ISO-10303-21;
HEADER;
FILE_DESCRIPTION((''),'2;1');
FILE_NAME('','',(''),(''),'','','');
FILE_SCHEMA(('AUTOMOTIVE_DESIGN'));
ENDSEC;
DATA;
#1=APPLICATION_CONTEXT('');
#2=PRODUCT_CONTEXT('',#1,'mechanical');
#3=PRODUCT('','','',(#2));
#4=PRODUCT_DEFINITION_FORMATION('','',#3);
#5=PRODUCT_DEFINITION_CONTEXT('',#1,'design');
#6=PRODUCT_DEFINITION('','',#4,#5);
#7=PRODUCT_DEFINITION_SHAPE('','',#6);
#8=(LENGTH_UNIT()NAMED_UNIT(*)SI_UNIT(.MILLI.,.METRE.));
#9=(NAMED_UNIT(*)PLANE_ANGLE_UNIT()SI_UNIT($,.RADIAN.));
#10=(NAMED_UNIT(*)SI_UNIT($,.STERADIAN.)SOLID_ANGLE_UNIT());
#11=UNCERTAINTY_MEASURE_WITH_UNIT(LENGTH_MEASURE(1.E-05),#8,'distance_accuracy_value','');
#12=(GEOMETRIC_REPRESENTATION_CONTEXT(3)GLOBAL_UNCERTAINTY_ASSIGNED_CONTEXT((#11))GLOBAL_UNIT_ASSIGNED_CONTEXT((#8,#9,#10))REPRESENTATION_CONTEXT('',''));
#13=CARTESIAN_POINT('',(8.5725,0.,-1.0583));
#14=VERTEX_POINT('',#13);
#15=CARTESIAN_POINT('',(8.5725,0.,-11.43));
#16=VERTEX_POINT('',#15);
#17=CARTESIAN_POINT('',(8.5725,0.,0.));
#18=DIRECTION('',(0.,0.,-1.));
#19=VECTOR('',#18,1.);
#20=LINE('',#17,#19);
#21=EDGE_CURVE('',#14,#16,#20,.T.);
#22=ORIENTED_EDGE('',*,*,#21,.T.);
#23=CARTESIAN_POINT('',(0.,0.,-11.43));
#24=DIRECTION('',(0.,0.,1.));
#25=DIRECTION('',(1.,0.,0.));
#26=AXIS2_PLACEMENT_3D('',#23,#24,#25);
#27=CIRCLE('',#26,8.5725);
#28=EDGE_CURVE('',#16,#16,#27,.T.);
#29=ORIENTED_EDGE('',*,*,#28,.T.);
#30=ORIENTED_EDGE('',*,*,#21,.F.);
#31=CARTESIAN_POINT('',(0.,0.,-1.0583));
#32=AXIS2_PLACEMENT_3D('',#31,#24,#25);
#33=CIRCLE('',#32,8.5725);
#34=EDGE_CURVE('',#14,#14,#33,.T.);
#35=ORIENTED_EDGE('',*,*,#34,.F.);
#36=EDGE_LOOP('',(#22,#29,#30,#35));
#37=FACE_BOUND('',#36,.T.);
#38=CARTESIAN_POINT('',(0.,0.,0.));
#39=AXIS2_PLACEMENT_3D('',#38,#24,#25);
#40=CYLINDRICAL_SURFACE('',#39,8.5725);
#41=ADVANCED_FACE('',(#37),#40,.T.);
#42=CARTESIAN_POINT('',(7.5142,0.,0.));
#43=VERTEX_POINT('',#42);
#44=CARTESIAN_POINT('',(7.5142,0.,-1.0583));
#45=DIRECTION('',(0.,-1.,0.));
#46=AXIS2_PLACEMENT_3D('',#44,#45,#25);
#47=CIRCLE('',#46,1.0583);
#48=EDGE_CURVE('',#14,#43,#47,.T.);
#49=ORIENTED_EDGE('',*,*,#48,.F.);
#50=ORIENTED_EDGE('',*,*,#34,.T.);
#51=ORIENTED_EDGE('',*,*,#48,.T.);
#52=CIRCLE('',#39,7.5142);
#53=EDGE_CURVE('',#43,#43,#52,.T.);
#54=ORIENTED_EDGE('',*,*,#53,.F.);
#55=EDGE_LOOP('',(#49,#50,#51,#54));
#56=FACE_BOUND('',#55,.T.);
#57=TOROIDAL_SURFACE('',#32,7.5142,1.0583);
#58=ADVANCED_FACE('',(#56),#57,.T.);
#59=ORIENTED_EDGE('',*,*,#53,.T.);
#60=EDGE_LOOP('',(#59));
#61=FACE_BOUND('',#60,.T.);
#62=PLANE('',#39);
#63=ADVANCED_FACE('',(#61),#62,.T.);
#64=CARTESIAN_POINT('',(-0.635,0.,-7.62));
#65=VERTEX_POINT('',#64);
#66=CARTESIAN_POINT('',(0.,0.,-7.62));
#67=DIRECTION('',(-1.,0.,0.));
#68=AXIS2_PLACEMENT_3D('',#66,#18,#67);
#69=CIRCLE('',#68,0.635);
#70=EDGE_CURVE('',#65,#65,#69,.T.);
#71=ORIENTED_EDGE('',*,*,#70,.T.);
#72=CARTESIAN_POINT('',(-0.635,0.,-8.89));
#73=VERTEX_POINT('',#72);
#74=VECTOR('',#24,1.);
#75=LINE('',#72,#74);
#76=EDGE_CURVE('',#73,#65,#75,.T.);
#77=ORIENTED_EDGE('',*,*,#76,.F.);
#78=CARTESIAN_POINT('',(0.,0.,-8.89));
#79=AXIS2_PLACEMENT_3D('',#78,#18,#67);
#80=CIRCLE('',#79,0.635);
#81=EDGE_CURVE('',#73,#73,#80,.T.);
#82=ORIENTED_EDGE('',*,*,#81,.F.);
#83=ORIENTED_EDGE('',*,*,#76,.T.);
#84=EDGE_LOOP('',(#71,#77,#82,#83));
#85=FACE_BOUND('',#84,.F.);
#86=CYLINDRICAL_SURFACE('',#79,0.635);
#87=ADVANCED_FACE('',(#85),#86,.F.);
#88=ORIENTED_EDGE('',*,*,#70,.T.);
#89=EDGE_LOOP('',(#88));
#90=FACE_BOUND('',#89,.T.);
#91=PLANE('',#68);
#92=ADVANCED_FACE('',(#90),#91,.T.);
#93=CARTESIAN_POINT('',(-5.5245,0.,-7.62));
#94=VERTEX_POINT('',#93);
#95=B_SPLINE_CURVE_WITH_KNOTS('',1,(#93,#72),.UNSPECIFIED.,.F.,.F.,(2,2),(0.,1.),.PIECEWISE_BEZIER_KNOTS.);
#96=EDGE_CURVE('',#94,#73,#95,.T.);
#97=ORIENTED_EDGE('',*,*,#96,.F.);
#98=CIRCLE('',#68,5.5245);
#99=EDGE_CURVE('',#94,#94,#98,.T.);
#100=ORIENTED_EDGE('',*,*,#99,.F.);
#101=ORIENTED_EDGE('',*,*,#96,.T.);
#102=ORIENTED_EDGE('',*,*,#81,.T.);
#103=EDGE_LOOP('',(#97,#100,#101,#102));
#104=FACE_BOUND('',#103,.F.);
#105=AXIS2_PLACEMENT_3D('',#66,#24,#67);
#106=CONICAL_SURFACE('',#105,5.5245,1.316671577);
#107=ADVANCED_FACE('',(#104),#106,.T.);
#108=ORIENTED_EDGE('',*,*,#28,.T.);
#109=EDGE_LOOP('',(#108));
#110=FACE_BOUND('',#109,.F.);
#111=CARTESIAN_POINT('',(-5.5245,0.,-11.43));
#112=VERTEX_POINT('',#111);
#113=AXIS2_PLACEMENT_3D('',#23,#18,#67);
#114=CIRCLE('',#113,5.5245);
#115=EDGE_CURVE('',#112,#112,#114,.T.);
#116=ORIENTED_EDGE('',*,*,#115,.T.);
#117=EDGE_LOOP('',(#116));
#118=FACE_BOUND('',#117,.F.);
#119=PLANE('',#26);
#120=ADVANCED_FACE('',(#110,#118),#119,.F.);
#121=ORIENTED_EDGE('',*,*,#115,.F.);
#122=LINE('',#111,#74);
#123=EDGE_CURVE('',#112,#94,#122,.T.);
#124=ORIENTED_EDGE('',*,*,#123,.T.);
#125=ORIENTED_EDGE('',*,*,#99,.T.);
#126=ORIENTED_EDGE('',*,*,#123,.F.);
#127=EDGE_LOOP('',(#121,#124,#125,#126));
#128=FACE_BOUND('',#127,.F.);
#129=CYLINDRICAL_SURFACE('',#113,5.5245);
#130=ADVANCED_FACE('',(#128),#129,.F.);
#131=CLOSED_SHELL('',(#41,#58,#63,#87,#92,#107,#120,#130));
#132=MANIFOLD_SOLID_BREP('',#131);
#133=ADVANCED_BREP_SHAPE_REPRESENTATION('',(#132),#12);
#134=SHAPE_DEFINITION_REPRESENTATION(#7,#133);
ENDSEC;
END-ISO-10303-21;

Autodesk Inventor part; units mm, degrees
ref_plane "YZ Plane" through (0, 0, 0) normal (1, 0, 0) x (0, 1, 0)
ref_plane "XZ Plane" through (0, 0, 0) normal (0, 1, 0) x (-1, 0, 0)
ref_plane "XY Plane" through (0, 0, 0) normal (0, 0, 1) x (1, 0, 0)
sketch "Sketch1" plane through (0, 0, 0) normal (0, 0, 1) x (1, 0, 0)
  circle A0 centre (0, 0) radius 8.5725
  dimension "d0" = 17.145
extrude "Extrusion1" add sketch "Sketch1" against normal blind 11.43
sketch "Sketch2" plane through (0, 0, -11.43) normal (0, 0, -1) x (-1, 0, 0)
  circle A0 centre (0, 0) radius 5.5245
  dimension "d3" = 11.049
extrude "Extrusion2" cut sketch "Sketch2" against normal blind 3.81
fillet "Fillet1" radius 1.0583 1 edges at (-8.5725, 0, 0)
ref_plane "Work Plane1" through (0, 0, -8.89) normal (0, 0, -1) x (-1, 0, 0)
sketch "Sketch3" plane through (0, 0, -8.89) normal (0, 0, -1) x (-1, 0, 0)
  circle A0 centre (0, 0) radius 0.635
  dimension "d8" = 1.27
loft "Loft1" add profiles "Sketch3" section 1 edges at (5.5245, 0, -7.62)
sketch "Sketch4" plane through (0, 0, -8.89) normal (0, 0, -1) x (-1, 0, 0)
  circle A0 centre (0, 0) radius 0.635 projected
  circle A1 centre (0, 0) radius 0.9525
  dimension "d13" = 1.905
extrude "Extrusion3" cut sketch "Sketch4" against normal blind 1.27 contours A0
equation "\"d0\" = outsideDiameterForHoleInCat"
equation "\"d1\" = length"
equation "\"d3\" = holeForInteriorButton"
equation "\"d4\" = depthForInteriorButton"
equation "\"d6\" = topFilletRadius"
equation "\"d8\" = offsetCircleDiameter"
equation "\"d13\" = glueHoleDiameter"
equation "\"d14\" = glueHoleDepth"
equation "\"outsideDiameterForHoleInCat\" = 17.145"
equation "\"length\" = 11.43"
equation "\"holeForInteriorButton\" = 11.049"
equation "\"depthForInteriorButton\" = 3.81"
equation "\"planeOffset\" = 0.635"
equation "\"offsetCircleDiameter\" = 1.27"
equation "\"topFilletRadius\" = 1.05833"
equation "\"glueHoleDiameter\" = 1.905"
equation "\"glueHoleDepth\" = 1.27"
properties part number "buttonForCatButton"
